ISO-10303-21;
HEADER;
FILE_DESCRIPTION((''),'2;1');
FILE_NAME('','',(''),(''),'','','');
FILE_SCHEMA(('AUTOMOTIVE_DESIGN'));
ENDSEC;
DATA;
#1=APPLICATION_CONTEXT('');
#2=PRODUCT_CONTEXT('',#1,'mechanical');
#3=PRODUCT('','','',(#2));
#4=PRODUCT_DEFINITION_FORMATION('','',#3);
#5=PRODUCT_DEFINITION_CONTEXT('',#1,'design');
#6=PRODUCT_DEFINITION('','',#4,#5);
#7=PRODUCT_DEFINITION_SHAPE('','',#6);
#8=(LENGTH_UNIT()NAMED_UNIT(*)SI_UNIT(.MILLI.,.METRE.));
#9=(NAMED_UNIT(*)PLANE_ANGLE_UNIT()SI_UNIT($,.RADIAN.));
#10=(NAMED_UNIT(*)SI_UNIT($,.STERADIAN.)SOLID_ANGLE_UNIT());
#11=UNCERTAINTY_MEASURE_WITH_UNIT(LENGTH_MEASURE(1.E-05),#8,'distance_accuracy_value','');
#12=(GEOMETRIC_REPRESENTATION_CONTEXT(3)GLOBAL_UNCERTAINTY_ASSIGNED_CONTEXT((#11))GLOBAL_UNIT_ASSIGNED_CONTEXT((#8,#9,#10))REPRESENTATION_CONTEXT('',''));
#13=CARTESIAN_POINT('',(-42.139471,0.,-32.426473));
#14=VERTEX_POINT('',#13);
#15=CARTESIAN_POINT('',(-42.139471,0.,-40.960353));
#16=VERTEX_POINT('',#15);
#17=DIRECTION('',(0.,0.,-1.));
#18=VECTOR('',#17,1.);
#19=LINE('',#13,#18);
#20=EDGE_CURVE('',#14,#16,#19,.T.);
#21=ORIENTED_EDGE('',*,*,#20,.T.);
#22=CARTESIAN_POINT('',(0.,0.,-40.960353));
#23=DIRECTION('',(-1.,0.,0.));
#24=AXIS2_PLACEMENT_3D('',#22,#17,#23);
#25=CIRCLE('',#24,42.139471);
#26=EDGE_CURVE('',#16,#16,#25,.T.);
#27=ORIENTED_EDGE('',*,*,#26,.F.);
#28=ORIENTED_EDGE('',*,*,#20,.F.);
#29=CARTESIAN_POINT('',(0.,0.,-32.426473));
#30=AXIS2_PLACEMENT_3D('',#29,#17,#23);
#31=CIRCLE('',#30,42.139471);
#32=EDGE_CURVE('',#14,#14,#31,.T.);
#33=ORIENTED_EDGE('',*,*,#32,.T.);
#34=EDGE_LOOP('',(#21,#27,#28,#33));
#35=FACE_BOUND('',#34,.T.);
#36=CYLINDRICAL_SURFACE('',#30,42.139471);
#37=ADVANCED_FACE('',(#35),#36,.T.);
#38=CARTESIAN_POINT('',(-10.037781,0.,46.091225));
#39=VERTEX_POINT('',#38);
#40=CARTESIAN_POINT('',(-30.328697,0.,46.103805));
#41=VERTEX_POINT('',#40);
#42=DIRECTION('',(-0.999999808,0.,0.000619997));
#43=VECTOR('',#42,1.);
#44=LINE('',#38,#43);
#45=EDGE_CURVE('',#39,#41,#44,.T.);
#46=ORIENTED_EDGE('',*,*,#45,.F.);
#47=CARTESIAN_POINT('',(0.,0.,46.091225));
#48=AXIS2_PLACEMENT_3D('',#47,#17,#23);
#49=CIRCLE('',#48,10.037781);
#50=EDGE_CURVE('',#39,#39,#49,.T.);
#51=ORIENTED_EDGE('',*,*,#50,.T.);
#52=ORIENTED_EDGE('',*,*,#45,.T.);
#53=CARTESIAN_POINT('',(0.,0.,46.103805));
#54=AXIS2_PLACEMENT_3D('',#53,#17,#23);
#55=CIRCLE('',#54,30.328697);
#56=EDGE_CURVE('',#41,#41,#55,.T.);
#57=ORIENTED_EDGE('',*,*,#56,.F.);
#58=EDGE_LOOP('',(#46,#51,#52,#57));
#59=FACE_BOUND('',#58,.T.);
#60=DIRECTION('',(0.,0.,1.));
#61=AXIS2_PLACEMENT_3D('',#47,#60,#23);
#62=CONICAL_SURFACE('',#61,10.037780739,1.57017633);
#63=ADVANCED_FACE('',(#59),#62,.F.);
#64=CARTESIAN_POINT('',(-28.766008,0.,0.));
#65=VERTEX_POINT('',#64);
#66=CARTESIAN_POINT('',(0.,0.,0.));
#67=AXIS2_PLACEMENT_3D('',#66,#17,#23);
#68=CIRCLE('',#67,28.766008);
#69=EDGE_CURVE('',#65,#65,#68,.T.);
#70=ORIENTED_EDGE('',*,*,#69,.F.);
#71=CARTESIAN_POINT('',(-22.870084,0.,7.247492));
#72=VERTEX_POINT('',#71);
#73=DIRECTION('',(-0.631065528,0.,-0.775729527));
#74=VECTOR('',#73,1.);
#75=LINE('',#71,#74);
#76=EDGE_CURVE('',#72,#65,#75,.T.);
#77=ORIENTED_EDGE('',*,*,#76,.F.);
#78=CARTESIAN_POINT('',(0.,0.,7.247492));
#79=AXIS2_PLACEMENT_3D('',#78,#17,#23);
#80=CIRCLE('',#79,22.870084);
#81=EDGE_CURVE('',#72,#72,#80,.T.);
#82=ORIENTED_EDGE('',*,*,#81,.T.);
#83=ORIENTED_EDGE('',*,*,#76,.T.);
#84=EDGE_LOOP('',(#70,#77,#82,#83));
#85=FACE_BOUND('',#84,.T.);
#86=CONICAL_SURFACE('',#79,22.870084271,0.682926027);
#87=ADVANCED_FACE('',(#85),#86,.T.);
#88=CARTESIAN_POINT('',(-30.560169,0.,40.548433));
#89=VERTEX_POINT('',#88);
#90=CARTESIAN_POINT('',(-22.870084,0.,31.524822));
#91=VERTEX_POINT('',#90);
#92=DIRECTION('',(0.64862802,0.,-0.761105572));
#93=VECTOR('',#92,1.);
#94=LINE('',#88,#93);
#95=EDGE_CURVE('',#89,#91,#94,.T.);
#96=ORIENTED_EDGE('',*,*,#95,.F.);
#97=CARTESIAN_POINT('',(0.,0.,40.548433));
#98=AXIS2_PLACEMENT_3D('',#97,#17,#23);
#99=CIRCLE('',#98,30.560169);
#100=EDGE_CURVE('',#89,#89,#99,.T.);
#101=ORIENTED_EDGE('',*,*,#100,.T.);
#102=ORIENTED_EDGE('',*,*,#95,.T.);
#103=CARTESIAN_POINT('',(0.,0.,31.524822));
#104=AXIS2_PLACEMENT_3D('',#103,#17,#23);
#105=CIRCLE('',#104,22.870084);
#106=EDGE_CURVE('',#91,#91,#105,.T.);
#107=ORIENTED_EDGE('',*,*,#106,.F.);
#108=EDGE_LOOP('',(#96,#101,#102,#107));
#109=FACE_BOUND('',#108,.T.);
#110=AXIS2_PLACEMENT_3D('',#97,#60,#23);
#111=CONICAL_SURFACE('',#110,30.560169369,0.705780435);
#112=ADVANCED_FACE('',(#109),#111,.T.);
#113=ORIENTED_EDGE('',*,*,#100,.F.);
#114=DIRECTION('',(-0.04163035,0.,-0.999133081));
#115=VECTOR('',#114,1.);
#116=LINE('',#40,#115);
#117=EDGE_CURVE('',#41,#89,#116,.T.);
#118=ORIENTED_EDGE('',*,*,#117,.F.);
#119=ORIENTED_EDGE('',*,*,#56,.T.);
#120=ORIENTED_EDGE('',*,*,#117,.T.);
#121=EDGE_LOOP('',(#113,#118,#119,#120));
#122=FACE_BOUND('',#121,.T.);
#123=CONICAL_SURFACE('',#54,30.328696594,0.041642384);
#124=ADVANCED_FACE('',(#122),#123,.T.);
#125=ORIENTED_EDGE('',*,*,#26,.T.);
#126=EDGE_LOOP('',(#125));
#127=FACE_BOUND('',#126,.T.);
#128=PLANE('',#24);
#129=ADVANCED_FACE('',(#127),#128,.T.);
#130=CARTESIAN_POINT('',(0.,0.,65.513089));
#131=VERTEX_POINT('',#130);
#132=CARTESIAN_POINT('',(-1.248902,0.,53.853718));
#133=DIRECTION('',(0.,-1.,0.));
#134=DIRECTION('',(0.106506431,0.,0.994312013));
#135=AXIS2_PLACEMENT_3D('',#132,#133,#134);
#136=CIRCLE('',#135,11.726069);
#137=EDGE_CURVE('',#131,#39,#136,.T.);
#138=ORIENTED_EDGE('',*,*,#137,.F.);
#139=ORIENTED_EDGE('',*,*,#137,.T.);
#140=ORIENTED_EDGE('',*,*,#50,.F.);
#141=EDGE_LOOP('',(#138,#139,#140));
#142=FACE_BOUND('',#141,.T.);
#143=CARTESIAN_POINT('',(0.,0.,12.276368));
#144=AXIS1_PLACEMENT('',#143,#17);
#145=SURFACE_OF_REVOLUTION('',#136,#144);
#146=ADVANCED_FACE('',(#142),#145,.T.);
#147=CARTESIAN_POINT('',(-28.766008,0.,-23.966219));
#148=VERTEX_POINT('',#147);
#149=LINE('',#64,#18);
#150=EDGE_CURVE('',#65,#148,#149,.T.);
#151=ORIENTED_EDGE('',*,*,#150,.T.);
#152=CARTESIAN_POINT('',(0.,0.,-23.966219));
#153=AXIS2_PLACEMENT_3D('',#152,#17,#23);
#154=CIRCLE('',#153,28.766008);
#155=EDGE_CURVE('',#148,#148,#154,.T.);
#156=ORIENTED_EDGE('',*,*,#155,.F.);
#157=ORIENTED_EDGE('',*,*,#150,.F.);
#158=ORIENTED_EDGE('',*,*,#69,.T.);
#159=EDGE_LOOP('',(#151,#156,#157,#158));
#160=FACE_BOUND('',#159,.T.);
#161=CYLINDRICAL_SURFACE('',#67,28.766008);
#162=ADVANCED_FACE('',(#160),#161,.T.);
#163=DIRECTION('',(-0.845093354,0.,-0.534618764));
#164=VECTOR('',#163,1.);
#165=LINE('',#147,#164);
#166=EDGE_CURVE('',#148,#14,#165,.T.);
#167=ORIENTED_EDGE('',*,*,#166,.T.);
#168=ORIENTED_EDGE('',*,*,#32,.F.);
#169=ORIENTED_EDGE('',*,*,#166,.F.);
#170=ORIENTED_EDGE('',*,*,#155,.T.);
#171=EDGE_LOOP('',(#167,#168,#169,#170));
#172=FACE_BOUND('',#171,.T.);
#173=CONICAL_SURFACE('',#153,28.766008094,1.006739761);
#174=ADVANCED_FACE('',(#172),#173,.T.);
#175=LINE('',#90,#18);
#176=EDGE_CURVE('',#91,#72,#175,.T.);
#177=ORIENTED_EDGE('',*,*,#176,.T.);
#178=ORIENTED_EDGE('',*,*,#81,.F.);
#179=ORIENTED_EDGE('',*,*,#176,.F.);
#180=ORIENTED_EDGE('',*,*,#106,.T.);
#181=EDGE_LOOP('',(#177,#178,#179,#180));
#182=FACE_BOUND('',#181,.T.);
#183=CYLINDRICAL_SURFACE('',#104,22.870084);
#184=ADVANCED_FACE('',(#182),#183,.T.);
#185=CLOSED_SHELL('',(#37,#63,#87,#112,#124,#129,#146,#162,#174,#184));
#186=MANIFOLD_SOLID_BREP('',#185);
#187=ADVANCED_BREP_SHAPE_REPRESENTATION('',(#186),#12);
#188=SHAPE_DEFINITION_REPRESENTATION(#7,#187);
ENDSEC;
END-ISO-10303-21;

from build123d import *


# Not quite as in the source:
# - a feature names something its author has since deleted; it is built from what else it names


with BuildPart() as f1:
    # F0 (on Front) → F1 (revolve)
    with BuildSketch(Plane.XZ):
        with BuildLine():
            Line((-28.766008094, 0), (-28.766008094, -23.9662192762))
            Line((-28.766008094, -23.9662192762), (-42.1394705772, -32.4264727533))
            Line((-42.1394705772, -32.4264727533), (-42.1394705772, -40.9603528678))
            Line((-42.1394705772, -40.9603528678), (0, -40.9603528678))
            Line((0, -40.9603528678), (0, 65.5130892992))
            ThreePointArc((0, 65.5130892992), (-11.6659559175, 59.2375527161), (-10.0377807394, 46.0912249982))
            Line((-10.0377807394, 46.0912249982), (-30.3286965936, 46.1038053036))
            Line((-30.3286965936, 46.1038053036), (-30.560169369, 40.5484326184))
            Line((-30.560169369, 40.5484326184), (-22.8700842708, 31.5248221159))
            Line((-22.8700842708, 31.5248221159), (-22.8700842708, 7.2474917397))
            Line((-22.8700842708, 7.2474917397), (-28.766008094, 0))
        make_face()
    revolve(axis=Axis((0, 0, 12.2763682157), (0, 0, -1)))


solid = f1.part
